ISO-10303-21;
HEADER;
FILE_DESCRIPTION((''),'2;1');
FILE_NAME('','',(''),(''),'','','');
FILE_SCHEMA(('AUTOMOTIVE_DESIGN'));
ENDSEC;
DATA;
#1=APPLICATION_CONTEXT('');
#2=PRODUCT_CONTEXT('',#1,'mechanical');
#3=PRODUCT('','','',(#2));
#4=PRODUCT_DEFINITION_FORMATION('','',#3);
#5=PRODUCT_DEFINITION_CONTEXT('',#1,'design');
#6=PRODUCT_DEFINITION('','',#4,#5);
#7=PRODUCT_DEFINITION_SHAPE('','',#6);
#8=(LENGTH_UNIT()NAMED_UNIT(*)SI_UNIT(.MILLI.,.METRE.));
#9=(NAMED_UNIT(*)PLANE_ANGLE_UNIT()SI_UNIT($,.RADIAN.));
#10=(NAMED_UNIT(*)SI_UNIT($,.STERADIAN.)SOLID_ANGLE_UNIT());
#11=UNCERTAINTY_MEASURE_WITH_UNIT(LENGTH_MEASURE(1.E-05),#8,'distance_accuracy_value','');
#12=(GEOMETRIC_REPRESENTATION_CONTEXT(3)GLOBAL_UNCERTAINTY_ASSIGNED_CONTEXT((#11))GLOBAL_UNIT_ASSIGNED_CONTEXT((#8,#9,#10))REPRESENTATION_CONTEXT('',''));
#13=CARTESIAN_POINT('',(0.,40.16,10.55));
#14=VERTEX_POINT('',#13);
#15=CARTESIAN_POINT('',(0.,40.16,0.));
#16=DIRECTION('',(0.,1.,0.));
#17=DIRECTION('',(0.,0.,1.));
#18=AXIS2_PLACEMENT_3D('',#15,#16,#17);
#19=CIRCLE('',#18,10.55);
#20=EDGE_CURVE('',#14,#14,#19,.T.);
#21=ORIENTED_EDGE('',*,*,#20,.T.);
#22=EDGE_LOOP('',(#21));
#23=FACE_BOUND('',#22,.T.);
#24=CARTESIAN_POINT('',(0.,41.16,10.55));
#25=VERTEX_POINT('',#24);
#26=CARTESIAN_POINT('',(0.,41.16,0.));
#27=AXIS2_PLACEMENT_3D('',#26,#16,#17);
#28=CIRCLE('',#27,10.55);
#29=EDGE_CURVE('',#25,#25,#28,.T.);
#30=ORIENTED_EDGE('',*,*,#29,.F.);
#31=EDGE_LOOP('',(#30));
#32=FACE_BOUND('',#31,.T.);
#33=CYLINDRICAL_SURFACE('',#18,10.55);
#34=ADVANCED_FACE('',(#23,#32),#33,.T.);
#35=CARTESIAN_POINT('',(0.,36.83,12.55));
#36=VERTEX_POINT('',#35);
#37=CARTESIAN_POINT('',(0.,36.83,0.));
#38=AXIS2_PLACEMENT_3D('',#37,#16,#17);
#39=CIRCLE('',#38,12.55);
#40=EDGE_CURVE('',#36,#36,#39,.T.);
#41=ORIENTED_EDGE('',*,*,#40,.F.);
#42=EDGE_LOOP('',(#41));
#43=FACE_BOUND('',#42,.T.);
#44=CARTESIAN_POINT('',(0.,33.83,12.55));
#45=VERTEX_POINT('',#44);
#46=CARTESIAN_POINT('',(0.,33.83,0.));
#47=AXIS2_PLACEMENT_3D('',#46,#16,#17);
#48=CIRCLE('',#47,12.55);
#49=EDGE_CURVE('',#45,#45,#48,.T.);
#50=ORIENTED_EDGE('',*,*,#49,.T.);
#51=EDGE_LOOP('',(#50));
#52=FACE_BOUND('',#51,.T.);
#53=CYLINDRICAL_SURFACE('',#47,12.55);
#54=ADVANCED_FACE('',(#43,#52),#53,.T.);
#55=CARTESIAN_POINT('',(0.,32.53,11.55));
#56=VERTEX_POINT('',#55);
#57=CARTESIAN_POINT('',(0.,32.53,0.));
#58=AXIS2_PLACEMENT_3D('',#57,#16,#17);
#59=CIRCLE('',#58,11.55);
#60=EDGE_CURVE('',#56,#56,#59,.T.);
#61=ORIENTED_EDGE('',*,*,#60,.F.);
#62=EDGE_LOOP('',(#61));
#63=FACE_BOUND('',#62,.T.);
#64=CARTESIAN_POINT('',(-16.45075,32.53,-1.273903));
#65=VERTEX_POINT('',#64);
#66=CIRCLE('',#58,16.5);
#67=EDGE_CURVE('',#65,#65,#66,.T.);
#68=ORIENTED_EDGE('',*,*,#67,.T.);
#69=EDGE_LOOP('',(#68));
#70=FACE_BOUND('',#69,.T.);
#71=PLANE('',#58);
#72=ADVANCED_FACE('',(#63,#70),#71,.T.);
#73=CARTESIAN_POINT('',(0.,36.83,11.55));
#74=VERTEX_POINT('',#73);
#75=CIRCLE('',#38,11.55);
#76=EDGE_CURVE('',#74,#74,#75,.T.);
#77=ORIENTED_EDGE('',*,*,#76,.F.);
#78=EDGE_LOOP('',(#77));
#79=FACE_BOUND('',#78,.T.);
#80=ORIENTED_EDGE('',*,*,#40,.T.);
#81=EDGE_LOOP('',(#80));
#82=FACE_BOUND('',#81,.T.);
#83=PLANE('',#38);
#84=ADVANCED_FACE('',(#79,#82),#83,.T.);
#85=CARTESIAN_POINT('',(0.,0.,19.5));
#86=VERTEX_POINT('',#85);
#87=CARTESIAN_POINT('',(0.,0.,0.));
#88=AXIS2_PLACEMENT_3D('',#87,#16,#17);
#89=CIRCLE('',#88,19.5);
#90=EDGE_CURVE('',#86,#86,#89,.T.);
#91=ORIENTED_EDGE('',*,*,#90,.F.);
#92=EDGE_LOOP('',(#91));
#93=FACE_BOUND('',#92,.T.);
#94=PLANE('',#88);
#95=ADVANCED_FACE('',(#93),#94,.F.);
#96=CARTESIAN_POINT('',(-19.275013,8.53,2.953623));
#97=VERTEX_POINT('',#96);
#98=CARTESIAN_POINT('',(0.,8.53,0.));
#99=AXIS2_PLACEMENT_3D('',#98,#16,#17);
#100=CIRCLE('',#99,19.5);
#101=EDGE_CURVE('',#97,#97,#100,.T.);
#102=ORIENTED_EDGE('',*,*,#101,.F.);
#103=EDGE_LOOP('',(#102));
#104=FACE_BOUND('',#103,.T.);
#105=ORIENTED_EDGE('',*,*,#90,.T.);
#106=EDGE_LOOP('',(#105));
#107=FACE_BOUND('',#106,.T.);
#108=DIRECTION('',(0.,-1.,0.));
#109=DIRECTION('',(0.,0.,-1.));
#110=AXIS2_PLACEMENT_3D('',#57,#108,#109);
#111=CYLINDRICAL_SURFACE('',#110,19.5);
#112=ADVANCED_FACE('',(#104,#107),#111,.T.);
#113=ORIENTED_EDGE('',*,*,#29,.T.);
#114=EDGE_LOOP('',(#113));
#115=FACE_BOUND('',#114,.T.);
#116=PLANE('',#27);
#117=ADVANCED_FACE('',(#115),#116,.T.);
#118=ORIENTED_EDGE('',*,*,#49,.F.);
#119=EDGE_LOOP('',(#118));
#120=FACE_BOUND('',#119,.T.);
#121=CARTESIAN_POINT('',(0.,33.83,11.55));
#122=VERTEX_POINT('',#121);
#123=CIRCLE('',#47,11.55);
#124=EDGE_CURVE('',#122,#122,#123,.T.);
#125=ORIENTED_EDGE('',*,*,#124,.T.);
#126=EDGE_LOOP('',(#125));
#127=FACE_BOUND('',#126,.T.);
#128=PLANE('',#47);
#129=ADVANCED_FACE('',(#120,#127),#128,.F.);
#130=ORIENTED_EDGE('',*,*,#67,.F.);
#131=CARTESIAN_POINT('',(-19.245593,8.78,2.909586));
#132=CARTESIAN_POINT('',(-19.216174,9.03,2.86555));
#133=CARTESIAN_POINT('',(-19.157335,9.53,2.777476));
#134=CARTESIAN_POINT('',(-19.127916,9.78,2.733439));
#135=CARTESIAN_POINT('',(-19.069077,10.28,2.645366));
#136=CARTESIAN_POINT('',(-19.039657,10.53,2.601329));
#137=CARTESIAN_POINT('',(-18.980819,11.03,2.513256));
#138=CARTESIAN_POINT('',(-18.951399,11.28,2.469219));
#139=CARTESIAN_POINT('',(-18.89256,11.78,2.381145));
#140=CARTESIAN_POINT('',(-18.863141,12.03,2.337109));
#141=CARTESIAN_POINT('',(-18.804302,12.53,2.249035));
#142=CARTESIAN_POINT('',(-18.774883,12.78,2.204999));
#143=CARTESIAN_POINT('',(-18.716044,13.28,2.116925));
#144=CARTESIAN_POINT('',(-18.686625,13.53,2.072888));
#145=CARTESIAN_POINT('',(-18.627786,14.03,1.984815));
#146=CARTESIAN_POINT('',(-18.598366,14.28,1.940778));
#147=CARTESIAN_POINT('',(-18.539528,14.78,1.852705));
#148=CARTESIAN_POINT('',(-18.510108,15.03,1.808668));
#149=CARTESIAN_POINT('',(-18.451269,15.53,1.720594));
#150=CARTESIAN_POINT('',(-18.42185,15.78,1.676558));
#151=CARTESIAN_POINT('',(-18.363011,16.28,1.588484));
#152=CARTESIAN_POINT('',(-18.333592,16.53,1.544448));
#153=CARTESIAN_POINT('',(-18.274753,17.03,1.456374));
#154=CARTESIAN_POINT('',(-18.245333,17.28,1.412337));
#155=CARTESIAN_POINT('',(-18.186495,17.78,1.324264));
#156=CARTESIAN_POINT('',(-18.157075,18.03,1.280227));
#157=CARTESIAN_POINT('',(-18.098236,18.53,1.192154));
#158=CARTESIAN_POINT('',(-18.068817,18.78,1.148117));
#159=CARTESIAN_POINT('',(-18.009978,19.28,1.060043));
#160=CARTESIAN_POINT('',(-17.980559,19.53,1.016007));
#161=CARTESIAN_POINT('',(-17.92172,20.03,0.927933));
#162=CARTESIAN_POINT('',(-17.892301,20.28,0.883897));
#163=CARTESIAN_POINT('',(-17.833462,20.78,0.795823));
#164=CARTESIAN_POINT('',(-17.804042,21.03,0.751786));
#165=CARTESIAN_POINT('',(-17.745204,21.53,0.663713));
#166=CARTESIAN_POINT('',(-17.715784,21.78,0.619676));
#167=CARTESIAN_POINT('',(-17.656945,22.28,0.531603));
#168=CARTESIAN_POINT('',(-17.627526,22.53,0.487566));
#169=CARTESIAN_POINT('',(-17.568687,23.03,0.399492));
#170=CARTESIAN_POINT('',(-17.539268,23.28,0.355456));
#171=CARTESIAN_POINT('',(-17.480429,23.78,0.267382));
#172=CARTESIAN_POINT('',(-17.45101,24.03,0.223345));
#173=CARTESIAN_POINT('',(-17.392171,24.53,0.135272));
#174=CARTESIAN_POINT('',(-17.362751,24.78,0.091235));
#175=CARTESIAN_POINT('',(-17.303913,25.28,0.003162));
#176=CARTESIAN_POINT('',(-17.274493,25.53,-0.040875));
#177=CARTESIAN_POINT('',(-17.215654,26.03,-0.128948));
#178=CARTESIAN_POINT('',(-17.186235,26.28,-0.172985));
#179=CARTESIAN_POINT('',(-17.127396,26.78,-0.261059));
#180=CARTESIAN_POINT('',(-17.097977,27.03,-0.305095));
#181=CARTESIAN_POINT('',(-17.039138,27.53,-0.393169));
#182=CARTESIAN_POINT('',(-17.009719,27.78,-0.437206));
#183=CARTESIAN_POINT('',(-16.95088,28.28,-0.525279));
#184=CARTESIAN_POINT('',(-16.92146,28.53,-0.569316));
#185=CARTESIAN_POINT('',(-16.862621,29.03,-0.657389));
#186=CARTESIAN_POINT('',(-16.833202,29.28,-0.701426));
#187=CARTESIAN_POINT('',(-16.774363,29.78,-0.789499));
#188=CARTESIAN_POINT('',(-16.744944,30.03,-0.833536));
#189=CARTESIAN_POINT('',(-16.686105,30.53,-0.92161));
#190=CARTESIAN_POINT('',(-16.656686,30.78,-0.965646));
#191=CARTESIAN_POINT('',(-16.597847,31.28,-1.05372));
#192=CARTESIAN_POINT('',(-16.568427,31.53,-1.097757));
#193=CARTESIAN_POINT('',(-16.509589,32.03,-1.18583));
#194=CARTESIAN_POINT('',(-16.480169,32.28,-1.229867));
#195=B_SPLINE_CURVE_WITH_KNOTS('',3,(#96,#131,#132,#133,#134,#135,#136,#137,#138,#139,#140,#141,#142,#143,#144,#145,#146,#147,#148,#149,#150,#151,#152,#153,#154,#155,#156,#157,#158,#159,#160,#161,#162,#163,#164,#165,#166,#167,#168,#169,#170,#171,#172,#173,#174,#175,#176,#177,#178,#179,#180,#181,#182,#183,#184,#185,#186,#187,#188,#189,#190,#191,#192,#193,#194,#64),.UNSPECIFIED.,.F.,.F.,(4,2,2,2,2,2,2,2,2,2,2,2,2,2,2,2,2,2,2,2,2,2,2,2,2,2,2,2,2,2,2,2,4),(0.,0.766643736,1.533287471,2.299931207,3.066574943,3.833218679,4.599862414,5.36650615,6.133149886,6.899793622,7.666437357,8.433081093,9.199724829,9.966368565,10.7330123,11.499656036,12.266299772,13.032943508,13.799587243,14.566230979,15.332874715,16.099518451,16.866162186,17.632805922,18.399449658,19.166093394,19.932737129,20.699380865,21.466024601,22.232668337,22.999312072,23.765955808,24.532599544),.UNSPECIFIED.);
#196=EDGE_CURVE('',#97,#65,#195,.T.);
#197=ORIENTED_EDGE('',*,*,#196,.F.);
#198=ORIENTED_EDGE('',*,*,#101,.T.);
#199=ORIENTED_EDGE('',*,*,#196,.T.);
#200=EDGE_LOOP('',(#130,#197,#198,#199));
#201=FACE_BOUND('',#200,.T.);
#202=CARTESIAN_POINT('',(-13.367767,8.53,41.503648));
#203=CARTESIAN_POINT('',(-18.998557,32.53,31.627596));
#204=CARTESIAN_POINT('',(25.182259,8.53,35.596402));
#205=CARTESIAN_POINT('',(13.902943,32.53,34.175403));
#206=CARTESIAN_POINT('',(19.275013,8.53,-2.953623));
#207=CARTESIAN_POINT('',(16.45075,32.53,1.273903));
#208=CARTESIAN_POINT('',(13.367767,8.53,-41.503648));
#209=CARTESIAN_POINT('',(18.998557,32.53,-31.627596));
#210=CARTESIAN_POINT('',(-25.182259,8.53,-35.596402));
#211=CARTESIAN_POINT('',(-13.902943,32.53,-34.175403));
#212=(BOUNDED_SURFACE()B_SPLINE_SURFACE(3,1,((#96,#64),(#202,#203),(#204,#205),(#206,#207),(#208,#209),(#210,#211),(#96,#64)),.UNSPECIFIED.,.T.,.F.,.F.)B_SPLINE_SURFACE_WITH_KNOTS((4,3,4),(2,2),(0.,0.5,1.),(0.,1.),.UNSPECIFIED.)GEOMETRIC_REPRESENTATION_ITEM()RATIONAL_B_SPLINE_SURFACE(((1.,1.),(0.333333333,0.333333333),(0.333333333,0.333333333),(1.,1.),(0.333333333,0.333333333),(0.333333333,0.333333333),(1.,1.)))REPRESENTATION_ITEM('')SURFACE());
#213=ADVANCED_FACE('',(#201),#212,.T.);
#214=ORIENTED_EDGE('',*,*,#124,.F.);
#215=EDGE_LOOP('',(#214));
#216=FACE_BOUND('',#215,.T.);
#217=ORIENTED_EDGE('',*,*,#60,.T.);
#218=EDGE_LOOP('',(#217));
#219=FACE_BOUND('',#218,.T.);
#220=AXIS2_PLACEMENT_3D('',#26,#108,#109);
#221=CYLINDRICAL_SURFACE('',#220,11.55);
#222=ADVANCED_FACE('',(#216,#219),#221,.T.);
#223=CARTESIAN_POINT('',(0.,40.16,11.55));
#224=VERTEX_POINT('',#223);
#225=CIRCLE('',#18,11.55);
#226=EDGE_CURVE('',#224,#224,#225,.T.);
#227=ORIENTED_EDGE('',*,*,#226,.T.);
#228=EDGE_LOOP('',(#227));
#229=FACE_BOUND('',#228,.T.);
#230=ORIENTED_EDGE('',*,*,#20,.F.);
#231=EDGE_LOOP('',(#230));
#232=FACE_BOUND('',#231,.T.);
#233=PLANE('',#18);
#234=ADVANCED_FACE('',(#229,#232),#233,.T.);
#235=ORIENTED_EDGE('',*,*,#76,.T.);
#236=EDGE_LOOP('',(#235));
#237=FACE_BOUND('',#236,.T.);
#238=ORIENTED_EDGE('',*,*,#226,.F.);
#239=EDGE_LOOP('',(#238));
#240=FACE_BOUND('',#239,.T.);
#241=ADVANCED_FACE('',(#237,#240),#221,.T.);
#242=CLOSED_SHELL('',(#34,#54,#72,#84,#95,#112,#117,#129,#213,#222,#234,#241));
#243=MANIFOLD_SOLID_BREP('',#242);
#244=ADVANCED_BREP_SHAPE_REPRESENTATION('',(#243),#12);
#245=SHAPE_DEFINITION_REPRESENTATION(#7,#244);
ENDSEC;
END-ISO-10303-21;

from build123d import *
from build123d.topology import SkipClean

# Parameters (mm, degrees)
SKETCH1_R           = 19.5
BOSS_EXTRUDE1_DEPTH = 32.53
SKETCH2_R           = 11.55
BOSS_EXTRUDE2_DEPTH = 8.63
BOSS_EXTRUDE3_START = -4.33
SKETCH3_R           = 12.55
BOSS_EXTRUDE3_DEPTH = 3
CUT_EXTRUDE1_START  = -1
SKETCH4_R           = 11.55
SKETCH4_R_2         = 10.55
CUT_EXTRUDE1_DEPTH  = 1
CUT_EXTRUDE3_START  = -24
SKETCH5_R           = 19.5
SKETCH5_R_2         = 16.5
CUT_EXTRUDE3_DEPTH  = 24


with BuildPart() as part:
    # Sketch1 → Boss-Extrude1 (new body)
    with BuildSketch(Plane(origin=(0, 0, 0), x_dir=(1, 0, 0), z_dir=(0, 1, 0))):
        with Locations(Location((0, 0, 0), (0, 0, 270))):
            Circle(SKETCH1_R)
    extrude(amount=BOSS_EXTRUDE1_DEPTH)

    # Sketch2 → Boss-Extrude2 (add)
    with BuildSketch(Plane(origin=(0, 32.53, 0), x_dir=(1, 0, 0), z_dir=(0, 1, 0))):
        with Locations(Location((0, 0, 0), (0, 0, 270))):
            Circle(SKETCH2_R)
    extrude(amount=BOSS_EXTRUDE2_DEPTH)

    # Sketch3 → Boss-Extrude3 (add)
    with BuildSketch(Plane(origin=(0, 41.16, 0), x_dir=(1, 0, 0), z_dir=(0, 1, 0)).offset(BOSS_EXTRUDE3_START)):
        with Locations(Location((0, 0, 0), (0, 0, 270))):
            Circle(SKETCH3_R)
    extrude(amount=-BOSS_EXTRUDE3_DEPTH)

    # Sketch4 → Cut-Extrude1 (cut)
    with BuildSketch(Plane(origin=(0, 41.16, 0), x_dir=(1, 0, 0), z_dir=(0, 1, 0)).offset(CUT_EXTRUDE1_START)):
        with Locations(Location((0, 0, 0), (0, 0, 270))):
            Circle(SKETCH4_R)
        with Locations(Location((0, 0, 0), (0, 0, 270))):
            Circle(SKETCH4_R_2, mode=Mode.SUBTRACT)
    extrude(amount=CUT_EXTRUDE1_DEPTH, mode=Mode.SUBTRACT)

    # Sketch5 → Cut-Extrude3 (cut)
    with BuildSketch(Plane(origin=(0, 32.53, 0), x_dir=(1, 0, 0), z_dir=(0, 1, 0)).offset(CUT_EXTRUDE3_START)):
        with Locations(Location((0, 0, 0), (0, 0, 270))):
            Circle(SKETCH5_R)
        with Locations(Location((0, 0, 0), (0, 0, 270))):
            Circle(SKETCH5_R_2, mode=Mode.SUBTRACT)
    extrude(amount=CUT_EXTRUDE3_DEPTH, mode=Mode.SUBTRACT)

    # Loft1: read off the stored shape, not the designer's step
    # Loft1: loft between two sections, ruled curve by curve
    with SkipClean():  # the faces are left unmerged after this step: merging them gives an invalid solid
        loft1_from = [
            Edge.make_bspline([(-19.27501261, 8.53, 2.953623009), (-13.367766593, 8.53, 41.503648229), (25.182258628, 8.53, 35.596402212), (19.27501261, 8.53, -2.953623009), (13.367766593, 8.53, -41.503648229), (-25.182258628, 8.53, -35.596402212), (-19.27501261, 8.53, 2.953623009)], [0, 0, 0, 0, 0.5, 0.5, 0.5, 1, 1, 1, 1], 3, [1, 0.333333333, 0.333333333, 1, 0.333333333, 0.333333333, 1]),
        ]
        loft1_to = [
            Edge.make_bspline([(-16.450749829, 32.53, -1.273903469), (-18.998556767, 32.53, 31.62759619), (13.902942892, 32.53, 34.175403128), (16.450749829, 32.53, 1.273903469), (18.998556767, 32.53, -31.62759619), (-13.902942892, 32.53, -34.175403128), (-16.450749829, 32.53, -1.273903469)], [0, 0, 0, 0, 0.5, 0.5, 0.5, 1, 1, 1, 1], 3, [1, 0.333333333, 0.333333333, 1, 0.333333333, 0.333333333, 1]),
        ]
        loft1 = Solid(Shell([*[Face.make_surface_from_curves(loft1_from[k], loft1_to[k]) for k in range(1)], Face(Wire(loft1_from)), Face(Wire(loft1_to))]))
        add(loft1)


solid = part.part
